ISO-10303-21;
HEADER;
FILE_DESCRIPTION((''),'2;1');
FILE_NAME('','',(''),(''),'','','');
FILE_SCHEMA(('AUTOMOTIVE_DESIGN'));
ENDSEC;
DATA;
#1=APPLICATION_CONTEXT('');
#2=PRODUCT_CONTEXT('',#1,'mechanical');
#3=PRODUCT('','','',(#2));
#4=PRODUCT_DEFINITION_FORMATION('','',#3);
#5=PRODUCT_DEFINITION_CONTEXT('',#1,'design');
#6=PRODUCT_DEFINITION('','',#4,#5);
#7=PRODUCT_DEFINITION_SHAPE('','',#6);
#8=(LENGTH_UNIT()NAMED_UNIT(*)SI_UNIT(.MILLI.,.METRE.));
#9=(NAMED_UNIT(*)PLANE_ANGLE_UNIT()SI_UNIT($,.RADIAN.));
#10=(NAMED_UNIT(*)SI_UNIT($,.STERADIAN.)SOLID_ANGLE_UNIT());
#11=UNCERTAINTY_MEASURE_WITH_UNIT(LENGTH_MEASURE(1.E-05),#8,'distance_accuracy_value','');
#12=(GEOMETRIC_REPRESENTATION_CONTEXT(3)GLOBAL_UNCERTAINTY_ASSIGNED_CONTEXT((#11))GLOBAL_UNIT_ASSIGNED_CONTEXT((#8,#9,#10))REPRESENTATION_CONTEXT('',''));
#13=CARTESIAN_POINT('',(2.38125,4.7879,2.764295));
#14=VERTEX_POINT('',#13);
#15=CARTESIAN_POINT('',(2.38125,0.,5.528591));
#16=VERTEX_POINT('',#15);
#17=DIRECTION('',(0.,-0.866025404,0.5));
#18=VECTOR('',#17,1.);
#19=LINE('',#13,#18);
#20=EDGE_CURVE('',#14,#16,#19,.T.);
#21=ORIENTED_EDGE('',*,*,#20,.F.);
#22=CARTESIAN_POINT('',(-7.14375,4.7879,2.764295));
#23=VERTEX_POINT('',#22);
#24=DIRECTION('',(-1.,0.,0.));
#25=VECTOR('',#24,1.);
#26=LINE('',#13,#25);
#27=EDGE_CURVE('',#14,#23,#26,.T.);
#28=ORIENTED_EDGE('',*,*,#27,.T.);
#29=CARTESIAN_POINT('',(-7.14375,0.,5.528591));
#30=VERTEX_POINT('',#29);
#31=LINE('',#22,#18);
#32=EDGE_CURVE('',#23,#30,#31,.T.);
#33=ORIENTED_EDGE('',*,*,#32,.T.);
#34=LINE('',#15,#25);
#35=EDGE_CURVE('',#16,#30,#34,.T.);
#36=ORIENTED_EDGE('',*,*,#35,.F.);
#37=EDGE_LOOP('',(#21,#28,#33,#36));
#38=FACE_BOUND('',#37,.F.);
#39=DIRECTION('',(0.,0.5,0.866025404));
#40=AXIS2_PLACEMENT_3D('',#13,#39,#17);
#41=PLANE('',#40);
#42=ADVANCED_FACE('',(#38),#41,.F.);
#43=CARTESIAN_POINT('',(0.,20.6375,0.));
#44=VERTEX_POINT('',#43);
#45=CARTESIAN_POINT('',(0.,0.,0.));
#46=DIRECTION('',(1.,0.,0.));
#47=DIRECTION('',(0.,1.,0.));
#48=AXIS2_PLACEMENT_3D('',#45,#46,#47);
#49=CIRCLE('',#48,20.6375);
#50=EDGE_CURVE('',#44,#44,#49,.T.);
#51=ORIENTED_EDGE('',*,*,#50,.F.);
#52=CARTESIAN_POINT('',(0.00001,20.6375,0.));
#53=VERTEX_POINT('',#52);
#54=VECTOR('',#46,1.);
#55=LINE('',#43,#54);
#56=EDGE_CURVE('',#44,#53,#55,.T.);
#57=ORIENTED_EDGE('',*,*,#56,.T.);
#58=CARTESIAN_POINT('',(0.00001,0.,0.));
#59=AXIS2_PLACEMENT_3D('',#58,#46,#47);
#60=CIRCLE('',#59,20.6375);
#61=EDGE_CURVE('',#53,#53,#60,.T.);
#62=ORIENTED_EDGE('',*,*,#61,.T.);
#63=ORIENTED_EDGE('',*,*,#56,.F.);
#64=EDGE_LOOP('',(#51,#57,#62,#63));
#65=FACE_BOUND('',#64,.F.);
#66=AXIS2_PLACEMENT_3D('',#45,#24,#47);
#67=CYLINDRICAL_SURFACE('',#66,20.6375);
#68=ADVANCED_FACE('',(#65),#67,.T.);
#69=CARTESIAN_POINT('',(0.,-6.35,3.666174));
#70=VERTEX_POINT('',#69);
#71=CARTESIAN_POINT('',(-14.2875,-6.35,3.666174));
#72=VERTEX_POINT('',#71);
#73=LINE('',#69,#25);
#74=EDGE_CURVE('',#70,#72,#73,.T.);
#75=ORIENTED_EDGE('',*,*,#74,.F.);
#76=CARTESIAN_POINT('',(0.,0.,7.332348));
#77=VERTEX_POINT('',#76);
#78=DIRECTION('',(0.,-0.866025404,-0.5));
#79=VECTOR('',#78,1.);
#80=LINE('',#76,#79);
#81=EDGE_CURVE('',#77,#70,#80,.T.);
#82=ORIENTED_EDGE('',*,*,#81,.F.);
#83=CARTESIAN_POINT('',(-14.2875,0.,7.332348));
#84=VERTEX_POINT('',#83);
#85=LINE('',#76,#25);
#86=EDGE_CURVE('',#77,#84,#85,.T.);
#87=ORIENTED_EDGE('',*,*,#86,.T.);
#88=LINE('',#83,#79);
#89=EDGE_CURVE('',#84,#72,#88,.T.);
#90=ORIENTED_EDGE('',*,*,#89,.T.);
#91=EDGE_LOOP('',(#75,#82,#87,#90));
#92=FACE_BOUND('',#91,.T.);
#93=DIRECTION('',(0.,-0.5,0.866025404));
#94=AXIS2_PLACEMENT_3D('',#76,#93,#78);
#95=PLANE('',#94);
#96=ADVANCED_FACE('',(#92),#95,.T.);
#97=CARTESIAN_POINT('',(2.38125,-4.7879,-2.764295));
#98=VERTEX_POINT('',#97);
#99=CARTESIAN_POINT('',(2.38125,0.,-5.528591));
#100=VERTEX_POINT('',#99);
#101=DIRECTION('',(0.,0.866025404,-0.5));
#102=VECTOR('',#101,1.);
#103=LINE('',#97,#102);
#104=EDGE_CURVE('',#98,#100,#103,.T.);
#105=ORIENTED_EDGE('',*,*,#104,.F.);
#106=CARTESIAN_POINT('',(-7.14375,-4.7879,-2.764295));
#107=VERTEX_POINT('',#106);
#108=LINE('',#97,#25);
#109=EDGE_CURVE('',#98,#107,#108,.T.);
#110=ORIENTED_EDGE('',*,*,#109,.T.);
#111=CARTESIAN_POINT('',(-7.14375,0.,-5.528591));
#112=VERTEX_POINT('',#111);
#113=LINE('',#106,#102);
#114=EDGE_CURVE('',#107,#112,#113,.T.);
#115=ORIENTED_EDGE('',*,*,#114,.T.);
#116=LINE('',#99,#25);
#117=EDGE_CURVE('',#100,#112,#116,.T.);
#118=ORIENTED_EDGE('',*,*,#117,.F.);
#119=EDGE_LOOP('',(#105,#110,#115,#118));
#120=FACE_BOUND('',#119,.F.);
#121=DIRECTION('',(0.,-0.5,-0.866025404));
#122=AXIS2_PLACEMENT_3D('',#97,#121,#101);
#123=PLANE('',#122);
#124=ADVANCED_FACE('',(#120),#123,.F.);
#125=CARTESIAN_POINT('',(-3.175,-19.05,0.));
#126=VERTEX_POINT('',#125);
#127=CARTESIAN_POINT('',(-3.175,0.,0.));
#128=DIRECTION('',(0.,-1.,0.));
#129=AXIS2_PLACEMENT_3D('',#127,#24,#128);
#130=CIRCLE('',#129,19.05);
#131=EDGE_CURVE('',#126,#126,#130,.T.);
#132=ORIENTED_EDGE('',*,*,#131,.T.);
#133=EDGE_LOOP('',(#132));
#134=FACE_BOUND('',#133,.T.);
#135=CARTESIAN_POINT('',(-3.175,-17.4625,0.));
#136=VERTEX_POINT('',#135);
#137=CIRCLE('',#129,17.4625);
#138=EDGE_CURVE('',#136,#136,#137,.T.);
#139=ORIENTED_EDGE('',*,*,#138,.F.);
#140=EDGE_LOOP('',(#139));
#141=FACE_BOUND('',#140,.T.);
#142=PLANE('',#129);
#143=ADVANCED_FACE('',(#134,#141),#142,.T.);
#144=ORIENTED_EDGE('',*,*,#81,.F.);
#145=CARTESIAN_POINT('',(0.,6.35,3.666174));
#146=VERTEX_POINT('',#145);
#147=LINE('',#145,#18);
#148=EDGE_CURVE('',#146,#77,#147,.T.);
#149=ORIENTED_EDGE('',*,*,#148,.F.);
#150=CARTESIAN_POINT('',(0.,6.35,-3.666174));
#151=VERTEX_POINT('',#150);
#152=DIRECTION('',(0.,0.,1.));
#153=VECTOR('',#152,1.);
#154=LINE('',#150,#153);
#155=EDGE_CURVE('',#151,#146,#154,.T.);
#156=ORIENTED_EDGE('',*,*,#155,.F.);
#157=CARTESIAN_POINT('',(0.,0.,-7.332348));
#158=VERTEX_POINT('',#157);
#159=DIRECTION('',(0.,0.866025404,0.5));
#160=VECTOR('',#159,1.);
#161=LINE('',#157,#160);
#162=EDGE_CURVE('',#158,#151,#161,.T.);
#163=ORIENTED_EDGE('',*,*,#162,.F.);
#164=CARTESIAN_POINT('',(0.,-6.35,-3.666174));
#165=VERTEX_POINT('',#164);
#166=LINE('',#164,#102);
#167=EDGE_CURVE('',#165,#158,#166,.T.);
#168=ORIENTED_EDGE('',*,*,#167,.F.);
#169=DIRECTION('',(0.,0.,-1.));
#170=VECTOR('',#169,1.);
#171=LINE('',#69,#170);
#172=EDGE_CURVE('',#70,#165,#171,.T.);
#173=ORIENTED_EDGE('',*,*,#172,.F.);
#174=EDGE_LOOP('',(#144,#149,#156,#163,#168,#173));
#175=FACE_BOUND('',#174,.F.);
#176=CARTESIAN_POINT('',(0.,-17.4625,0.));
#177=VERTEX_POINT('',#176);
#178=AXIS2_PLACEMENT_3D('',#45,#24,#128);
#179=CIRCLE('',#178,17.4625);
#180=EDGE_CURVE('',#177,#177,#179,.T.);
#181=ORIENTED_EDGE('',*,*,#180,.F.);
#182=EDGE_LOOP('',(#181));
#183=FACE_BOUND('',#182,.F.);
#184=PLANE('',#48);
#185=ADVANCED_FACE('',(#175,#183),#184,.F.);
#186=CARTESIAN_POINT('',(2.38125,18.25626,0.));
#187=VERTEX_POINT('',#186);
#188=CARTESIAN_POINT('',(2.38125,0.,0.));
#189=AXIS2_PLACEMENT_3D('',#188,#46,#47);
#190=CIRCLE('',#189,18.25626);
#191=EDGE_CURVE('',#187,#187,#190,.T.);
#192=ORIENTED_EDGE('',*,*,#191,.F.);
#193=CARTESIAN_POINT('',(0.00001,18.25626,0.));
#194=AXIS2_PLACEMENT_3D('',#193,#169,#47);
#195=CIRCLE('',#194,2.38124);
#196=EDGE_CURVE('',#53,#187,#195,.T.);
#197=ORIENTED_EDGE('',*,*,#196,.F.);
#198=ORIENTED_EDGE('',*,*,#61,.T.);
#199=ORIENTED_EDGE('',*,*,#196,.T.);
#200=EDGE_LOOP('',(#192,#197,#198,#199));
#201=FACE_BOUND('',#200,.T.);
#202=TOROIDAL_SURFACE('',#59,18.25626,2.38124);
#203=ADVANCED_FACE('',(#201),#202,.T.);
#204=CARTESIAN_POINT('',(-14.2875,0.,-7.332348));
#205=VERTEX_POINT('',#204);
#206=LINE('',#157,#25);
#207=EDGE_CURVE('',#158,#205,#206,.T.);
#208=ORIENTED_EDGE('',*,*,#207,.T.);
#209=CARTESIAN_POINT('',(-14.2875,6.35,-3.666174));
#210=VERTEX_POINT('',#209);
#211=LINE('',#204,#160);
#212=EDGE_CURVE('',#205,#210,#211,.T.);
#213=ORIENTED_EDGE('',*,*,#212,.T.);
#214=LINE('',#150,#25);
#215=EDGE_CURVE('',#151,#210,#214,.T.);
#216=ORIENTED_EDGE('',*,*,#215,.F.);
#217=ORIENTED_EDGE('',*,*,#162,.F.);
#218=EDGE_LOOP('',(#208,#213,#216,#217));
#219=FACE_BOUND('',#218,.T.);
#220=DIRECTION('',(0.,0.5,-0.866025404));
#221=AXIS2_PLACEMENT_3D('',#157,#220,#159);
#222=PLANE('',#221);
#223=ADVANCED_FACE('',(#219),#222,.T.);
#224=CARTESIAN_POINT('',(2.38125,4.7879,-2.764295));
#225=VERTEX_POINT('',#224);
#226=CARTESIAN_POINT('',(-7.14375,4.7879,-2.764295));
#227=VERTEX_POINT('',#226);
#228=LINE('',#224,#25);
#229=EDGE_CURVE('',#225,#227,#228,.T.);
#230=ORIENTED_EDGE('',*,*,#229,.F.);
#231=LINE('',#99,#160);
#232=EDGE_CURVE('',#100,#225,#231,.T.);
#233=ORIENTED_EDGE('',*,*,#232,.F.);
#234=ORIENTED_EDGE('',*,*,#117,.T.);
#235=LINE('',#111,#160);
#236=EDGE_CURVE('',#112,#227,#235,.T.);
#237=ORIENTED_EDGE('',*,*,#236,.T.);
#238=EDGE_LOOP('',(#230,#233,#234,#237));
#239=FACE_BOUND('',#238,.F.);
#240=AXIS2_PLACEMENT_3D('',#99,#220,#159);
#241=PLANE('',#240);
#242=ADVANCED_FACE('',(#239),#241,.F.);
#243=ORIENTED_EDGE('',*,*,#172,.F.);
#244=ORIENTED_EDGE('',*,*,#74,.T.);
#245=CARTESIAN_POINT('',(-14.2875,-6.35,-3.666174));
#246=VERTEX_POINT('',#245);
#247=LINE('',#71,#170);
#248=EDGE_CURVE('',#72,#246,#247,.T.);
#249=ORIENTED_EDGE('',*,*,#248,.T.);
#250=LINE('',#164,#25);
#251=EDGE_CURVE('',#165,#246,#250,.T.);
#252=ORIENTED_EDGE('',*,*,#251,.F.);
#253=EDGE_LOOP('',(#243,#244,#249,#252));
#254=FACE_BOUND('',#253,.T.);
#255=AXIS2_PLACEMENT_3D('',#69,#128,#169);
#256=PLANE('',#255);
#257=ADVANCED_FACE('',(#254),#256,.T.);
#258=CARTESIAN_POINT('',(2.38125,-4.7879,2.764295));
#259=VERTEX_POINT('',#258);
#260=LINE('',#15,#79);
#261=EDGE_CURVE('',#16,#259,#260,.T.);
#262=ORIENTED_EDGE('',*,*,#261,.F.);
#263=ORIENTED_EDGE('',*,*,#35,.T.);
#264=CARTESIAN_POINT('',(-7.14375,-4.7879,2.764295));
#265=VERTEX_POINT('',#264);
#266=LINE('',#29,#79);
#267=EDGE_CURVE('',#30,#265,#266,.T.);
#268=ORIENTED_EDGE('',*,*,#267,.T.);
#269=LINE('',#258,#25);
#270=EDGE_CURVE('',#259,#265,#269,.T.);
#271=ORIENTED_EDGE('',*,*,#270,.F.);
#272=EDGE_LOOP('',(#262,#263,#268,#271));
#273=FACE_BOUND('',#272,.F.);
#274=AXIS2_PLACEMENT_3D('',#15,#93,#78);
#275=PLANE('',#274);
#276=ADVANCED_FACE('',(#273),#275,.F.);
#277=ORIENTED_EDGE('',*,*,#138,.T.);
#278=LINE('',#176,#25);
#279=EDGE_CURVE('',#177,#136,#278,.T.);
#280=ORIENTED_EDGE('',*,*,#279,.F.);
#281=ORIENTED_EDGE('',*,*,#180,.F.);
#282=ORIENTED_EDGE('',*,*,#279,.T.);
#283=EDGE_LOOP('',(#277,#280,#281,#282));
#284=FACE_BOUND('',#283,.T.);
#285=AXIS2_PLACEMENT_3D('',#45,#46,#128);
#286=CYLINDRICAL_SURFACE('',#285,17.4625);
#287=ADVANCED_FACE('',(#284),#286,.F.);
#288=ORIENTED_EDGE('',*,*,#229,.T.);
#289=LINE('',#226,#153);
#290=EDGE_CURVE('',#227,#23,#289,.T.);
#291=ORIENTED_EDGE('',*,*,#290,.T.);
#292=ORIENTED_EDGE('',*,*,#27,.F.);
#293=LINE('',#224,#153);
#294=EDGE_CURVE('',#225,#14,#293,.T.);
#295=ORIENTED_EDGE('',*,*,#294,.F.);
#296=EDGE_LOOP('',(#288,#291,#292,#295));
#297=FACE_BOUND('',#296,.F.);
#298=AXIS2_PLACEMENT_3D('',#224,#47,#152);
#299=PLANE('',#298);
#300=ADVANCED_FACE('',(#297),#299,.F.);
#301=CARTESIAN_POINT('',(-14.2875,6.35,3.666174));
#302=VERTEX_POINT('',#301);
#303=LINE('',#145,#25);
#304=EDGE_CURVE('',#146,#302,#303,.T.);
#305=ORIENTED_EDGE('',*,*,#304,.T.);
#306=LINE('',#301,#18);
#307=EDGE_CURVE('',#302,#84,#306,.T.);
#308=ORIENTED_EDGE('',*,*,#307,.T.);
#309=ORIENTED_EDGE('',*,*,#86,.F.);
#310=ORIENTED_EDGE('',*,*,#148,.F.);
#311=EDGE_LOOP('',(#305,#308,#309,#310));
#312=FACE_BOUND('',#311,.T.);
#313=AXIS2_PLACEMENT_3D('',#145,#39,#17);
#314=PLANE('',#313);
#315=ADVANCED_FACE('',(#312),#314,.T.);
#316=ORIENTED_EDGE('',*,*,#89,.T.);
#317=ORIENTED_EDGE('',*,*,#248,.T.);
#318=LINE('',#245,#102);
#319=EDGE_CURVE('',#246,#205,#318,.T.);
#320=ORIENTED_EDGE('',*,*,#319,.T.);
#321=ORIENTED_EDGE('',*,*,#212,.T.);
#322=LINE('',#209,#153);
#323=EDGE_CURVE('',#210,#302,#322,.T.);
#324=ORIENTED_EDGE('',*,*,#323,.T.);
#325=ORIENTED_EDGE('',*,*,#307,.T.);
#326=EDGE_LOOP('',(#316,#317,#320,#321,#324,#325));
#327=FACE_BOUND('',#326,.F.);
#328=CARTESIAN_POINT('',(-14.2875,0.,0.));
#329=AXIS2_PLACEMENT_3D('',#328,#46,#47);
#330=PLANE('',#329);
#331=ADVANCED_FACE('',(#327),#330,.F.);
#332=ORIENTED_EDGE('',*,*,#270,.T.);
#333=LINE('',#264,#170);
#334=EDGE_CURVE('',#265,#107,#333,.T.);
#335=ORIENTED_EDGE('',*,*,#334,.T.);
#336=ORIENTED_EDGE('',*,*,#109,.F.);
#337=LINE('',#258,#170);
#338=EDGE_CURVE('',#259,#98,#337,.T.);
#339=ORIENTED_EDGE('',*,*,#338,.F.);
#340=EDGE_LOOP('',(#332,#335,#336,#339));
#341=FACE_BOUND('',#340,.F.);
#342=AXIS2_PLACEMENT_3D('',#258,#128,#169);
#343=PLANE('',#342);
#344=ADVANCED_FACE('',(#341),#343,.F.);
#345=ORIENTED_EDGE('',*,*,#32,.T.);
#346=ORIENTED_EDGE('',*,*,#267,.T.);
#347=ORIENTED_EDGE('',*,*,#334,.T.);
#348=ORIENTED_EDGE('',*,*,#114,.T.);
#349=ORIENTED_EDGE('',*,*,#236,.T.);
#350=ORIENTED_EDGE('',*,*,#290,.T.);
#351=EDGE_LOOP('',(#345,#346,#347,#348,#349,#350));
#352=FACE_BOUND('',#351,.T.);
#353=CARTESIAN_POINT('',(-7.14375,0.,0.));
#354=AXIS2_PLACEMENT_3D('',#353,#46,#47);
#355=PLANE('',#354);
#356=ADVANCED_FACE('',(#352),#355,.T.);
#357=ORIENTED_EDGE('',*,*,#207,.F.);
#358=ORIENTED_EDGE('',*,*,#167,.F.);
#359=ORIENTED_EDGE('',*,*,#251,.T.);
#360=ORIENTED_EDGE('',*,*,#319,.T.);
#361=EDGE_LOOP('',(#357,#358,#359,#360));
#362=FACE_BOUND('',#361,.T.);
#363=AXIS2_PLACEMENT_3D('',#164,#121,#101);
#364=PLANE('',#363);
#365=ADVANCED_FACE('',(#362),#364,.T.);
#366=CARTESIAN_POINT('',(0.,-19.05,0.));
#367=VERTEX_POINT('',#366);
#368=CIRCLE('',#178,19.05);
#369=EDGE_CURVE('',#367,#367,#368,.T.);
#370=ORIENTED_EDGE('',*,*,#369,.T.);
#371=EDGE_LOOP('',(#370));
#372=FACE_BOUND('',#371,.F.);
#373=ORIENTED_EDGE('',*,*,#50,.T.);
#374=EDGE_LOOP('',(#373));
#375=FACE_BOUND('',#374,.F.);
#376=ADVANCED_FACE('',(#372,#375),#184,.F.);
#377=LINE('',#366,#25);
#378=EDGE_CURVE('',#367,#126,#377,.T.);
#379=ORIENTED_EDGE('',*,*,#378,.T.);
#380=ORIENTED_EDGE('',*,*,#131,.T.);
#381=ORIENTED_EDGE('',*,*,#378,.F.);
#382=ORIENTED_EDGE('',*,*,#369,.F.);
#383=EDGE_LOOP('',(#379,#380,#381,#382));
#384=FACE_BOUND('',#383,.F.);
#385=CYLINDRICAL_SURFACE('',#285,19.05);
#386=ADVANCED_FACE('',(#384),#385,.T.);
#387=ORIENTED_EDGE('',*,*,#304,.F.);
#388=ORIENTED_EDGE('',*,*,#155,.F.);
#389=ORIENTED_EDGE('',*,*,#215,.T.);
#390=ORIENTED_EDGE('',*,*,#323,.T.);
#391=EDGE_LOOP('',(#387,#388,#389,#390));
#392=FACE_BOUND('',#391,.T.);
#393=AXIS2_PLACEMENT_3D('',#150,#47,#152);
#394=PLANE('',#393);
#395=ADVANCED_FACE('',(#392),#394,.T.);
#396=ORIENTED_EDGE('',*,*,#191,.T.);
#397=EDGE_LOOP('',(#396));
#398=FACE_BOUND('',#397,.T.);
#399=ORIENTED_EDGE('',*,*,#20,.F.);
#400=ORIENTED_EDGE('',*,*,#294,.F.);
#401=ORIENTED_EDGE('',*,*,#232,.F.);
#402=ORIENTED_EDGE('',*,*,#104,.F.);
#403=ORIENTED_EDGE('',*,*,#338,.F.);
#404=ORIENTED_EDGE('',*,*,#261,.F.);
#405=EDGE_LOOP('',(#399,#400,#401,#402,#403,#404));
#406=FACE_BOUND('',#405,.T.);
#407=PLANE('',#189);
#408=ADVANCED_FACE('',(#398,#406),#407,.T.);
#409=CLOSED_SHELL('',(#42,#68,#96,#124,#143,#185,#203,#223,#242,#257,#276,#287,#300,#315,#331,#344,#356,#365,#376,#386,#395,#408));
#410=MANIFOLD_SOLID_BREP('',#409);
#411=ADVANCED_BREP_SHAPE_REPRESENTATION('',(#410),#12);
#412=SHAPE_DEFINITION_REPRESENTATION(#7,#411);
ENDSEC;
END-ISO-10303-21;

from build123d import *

# Parameters (mm, degrees)
F1_DEPTH = 14.2875
F2_R     = 20.6375
F3_DEPTH = 2.38125
F5_DEPTH = 9.525
F6_R     = 19.05
F6_R_2   = 17.4625
F7_DEPTH = 3.175
F8_R     = 2.38124


# Not quite as in the source:
# - a fillet or chamfer is up to 0.001 mm smaller than in the source, because OpenCascade refuses the exact size


with BuildPart() as f1:
    # F0 (on Right) → F1 (new body)
    with BuildSketch(Plane.YZ):
        Polygon((6.35, -3.6661742094), (6.35, 3.6661742094), (0, 7.3323484187), (-6.35, 3.6661742094), (-6.35, -3.6661742094), (0, -7.3323484187), align=None)
    extrude(amount=-F1_DEPTH)

    # F2 (on Right) → F3 (join)
    with BuildSketch(Plane.YZ):
        Circle(F2_R)
    extrude(amount=F3_DEPTH)

    # F4 (on face) → F5 (cut)
    with BuildSketch(Plane.YZ.offset(2.38125)):
        Polygon((4.7879, -2.7642953539), (4.7879, 2.7642953539), (0, 5.5285907077), (-4.7879, 2.7642953539), (-4.7879, -2.7642953539), (0, -5.5285907077), align=None)
    extrude(amount=-F5_DEPTH, mode=Mode.SUBTRACT)

    # F6 (on face) → F7 (join)
    with BuildSketch(Plane(origin=(0, 0, 0), x_dir=(0, -1, 0), z_dir=(-1, 0, 0))):
        Circle(F6_R)
        Circle(F6_R_2, mode=Mode.SUBTRACT)
    extrude(amount=F7_DEPTH)

    # F8 (radius 2.38125 in the source; OpenCascade refuses exactly that, so slightly less here)
    f8_edges = [f1.edges().sort_by_distance(p)[0] for p in [
        (2.38125, -20.6375, 0),
    ]]
    fillet(f8_edges, radius=F8_R)


solid = f1.part
